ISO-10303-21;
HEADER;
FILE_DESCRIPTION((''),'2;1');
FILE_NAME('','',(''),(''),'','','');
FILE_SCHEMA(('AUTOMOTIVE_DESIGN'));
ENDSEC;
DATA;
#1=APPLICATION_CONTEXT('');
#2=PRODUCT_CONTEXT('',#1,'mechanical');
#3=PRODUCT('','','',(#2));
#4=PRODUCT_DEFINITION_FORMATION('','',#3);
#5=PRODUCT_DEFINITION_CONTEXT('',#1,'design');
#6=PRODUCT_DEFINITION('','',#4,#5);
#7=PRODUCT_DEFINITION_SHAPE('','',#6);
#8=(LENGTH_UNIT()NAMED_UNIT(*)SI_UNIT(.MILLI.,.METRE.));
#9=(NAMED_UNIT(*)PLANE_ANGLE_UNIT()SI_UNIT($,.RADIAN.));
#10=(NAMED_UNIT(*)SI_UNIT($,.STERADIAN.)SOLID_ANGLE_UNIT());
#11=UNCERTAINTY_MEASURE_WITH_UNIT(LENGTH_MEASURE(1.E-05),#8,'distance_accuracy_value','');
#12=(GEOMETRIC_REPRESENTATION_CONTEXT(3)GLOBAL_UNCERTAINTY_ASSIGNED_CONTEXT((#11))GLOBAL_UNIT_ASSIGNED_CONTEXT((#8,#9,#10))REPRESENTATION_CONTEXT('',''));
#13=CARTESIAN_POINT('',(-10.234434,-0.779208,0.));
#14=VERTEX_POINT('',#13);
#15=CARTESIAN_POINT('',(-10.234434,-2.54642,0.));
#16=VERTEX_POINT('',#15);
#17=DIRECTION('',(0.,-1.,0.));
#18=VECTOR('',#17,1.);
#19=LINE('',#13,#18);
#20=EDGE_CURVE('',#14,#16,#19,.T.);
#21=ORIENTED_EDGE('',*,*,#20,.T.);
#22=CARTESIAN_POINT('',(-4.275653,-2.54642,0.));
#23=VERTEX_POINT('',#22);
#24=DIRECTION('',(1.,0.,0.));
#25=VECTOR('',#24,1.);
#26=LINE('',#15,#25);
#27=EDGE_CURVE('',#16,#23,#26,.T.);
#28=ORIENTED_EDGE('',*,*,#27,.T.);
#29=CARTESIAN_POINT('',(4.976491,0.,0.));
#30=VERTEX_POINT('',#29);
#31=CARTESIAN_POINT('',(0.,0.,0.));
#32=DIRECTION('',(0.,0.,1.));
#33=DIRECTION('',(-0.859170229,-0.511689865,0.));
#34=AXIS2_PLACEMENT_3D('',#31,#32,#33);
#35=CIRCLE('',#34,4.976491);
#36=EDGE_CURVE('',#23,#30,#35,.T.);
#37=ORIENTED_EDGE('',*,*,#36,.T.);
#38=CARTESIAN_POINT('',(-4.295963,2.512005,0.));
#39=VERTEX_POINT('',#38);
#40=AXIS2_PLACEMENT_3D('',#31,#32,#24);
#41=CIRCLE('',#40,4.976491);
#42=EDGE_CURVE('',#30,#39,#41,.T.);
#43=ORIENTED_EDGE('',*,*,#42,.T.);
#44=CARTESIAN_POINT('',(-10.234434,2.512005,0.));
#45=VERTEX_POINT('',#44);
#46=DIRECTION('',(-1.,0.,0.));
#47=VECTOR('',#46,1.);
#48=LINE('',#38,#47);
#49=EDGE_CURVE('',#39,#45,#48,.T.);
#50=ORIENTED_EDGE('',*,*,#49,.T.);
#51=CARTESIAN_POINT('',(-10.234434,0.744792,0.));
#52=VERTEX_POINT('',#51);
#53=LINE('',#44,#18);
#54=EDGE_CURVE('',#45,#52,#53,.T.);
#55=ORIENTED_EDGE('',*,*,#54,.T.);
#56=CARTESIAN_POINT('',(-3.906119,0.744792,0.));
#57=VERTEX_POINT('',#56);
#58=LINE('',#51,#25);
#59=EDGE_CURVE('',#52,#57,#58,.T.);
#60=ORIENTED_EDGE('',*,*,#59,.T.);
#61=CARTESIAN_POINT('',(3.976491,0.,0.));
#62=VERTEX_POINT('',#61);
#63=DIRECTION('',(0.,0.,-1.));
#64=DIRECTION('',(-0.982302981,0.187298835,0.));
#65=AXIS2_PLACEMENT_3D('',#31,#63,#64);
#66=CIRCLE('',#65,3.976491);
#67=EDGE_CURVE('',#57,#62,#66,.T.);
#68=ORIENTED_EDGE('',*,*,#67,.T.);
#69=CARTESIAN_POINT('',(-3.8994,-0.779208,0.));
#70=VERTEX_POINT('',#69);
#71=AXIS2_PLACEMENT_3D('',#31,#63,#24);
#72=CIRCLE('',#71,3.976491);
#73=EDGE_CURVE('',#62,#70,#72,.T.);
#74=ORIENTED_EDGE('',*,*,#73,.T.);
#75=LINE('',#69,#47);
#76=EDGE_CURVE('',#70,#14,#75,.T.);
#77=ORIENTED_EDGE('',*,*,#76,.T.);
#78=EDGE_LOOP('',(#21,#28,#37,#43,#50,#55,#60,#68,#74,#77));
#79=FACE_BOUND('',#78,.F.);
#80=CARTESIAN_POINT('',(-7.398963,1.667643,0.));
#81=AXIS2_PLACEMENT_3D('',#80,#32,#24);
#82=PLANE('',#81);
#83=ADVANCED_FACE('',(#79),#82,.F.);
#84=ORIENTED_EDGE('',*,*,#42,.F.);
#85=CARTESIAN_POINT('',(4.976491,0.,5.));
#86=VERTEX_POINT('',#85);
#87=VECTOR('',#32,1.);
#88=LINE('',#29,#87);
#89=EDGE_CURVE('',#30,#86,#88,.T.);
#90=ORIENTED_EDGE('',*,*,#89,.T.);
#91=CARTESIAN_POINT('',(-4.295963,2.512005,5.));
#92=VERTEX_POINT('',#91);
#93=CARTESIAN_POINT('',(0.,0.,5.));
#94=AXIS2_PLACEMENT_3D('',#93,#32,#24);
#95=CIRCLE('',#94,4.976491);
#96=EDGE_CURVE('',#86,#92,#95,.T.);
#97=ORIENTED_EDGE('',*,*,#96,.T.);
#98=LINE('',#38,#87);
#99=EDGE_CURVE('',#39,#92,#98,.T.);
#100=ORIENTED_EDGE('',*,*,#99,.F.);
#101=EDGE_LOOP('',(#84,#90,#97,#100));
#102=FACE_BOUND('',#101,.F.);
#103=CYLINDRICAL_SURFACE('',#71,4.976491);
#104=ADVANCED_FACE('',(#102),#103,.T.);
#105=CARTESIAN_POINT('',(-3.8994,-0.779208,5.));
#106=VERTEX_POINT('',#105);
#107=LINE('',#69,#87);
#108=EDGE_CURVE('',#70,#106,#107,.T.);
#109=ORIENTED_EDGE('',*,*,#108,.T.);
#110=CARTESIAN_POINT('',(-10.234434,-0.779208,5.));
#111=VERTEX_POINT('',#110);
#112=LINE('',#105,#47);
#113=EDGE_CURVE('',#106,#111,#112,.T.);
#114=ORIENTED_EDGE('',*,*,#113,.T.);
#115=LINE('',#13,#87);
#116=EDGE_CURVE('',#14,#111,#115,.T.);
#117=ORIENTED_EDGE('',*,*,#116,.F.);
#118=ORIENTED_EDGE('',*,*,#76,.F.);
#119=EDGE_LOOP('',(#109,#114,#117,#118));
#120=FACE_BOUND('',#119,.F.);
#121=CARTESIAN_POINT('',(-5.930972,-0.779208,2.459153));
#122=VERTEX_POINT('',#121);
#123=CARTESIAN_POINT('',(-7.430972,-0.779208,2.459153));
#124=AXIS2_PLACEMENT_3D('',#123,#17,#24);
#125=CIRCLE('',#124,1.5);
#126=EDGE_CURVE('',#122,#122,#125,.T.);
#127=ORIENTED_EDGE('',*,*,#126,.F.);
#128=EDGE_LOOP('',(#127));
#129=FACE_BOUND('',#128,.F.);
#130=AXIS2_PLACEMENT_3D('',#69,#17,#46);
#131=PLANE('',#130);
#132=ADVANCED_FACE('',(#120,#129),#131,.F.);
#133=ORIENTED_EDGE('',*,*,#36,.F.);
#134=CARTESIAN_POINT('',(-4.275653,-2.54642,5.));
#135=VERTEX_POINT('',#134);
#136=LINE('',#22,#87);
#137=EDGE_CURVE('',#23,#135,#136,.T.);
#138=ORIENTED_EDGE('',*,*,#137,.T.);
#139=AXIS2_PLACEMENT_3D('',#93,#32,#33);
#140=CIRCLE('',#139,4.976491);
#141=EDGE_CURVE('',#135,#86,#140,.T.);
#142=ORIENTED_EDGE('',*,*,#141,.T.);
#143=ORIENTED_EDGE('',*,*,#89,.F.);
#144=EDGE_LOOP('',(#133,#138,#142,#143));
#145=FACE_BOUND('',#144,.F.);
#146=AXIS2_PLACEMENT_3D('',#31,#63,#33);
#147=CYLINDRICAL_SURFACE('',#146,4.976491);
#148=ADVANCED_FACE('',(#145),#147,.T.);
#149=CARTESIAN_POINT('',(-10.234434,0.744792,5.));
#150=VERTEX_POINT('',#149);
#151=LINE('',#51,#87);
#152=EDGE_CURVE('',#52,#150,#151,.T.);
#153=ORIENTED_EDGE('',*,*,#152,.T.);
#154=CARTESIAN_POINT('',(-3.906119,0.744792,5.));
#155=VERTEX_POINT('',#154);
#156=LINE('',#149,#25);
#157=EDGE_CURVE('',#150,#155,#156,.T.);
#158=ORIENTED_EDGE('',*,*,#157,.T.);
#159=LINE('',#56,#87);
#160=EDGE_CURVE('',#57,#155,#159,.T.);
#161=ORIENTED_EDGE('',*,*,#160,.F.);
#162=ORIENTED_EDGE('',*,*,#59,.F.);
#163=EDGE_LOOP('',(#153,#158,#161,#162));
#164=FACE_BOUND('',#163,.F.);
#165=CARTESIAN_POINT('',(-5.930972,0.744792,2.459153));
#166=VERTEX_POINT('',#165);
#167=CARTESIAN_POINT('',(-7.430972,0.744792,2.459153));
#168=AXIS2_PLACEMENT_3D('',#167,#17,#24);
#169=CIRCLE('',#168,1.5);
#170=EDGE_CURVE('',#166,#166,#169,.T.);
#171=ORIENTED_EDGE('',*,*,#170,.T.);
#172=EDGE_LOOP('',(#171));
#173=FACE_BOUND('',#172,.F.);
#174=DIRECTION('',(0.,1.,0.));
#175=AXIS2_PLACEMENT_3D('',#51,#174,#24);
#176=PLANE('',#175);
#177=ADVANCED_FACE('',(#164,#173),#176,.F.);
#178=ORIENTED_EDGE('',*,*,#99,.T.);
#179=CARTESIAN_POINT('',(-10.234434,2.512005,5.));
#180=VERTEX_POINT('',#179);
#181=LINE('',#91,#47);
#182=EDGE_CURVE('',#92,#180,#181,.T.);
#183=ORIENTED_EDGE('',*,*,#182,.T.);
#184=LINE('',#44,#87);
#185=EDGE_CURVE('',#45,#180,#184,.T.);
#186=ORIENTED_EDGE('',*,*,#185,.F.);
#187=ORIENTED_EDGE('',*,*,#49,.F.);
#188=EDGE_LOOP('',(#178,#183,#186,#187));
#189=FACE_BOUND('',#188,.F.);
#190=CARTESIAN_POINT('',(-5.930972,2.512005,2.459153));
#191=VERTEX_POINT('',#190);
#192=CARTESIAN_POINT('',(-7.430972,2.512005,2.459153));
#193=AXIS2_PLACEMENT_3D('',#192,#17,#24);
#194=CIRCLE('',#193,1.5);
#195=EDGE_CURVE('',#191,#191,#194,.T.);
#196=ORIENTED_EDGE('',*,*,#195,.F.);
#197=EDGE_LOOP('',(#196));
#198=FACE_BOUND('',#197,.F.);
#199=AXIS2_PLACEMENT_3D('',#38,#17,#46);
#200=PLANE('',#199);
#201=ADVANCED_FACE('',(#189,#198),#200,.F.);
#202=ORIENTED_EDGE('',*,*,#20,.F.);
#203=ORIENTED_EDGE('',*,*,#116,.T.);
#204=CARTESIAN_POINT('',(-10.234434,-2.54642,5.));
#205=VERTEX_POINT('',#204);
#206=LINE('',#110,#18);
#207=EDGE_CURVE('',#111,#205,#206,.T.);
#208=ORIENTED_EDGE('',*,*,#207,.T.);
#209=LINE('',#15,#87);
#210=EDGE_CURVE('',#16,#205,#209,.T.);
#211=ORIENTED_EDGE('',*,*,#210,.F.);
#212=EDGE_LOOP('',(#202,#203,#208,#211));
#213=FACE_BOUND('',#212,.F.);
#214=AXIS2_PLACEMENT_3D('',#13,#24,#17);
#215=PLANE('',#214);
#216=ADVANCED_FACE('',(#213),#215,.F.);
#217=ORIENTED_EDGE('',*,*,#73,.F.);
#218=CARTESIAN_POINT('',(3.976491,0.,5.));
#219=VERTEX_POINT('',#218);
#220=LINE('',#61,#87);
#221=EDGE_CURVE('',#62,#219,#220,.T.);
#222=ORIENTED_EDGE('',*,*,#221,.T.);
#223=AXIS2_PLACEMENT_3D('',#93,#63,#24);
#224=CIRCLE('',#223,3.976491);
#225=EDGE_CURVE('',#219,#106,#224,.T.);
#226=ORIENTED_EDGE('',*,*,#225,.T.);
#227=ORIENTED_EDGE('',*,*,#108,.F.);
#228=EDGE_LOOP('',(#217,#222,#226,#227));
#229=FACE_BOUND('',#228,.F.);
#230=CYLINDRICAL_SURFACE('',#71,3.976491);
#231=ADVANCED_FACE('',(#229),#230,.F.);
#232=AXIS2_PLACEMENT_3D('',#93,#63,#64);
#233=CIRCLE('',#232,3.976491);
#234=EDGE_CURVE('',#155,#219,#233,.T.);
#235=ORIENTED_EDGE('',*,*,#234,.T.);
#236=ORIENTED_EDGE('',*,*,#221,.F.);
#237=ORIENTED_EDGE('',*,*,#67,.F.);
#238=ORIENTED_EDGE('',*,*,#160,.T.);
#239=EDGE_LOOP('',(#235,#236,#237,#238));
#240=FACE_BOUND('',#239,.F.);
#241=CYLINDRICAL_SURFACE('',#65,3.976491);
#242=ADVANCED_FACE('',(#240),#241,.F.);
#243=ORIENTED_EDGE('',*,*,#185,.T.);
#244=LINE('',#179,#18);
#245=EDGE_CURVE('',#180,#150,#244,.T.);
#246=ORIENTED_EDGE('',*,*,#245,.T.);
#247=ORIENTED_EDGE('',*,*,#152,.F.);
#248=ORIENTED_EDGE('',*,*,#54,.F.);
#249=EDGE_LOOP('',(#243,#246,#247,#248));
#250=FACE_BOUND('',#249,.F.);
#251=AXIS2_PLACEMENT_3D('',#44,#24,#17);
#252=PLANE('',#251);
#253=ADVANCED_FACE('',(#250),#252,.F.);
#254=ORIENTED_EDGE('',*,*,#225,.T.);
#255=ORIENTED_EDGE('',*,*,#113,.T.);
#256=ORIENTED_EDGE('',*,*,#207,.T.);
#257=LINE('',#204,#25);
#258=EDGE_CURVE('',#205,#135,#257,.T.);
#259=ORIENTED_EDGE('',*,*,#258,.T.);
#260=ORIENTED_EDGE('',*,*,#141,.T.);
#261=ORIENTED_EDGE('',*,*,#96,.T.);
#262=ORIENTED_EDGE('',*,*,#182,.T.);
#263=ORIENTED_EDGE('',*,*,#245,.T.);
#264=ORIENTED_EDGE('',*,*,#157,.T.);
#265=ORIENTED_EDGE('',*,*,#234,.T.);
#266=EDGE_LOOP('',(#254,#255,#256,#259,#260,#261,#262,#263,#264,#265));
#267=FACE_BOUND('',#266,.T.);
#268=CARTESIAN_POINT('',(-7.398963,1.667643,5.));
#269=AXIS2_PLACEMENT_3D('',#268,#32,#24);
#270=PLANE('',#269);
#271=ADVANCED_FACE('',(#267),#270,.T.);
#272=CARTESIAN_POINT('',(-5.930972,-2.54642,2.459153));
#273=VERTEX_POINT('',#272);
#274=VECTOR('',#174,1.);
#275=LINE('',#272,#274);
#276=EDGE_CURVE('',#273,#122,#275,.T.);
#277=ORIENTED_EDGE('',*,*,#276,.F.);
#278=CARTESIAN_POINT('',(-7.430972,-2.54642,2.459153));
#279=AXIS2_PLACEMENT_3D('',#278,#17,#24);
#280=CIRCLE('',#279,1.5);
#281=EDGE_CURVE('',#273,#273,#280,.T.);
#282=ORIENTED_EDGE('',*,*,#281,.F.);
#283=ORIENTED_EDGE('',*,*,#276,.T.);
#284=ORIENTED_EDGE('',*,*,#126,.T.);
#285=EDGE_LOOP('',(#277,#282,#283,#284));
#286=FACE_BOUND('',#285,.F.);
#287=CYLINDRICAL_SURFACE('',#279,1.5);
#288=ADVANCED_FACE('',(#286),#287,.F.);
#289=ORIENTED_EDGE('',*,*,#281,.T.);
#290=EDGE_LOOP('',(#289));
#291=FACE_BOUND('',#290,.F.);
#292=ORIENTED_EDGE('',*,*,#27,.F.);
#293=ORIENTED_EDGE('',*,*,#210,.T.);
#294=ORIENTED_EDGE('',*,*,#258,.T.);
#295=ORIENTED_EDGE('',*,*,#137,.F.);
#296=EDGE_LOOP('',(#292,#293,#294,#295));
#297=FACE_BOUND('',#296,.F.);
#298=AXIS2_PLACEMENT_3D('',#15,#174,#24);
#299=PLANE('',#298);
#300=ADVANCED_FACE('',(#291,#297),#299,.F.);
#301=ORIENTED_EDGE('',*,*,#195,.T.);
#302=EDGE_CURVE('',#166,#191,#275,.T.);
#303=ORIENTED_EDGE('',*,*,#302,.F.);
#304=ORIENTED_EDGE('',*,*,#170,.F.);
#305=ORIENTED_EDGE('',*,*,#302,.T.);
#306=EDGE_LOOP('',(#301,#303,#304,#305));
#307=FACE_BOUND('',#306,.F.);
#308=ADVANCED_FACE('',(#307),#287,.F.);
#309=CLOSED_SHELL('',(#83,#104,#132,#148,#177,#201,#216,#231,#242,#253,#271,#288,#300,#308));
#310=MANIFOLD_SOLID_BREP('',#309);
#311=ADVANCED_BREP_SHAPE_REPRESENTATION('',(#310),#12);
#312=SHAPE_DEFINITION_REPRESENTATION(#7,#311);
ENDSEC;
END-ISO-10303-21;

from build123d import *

# Parameters (mm, degrees)
F1_DEPTH = 5
F2_R     = 1.5
F3_DEPTH = 25.4


with BuildPart() as f1:
    # F0 (on Top) → F1 (new body)
    with BuildSketch(Plane.XY):
        with BuildLine():
            Line((-10.2344341576, 0.7447922041), (-4.9204421579, 0.7447922041))
            ThreePointArc((-4.9204421579, 0.7447922041), (-4.6921521255, 1.6580635959), (-4.2959631379, 2.5120046127))
            Line((-4.2959631379, 2.5120046127), (-10.2344341576, 2.5120046127))
            Line((-10.2344341576, 2.5120046127), (-10.2344341576, 0.7447922041))
        make_face()
        with BuildLine():
            ThreePointArc((-4.2756532365, -2.5464202045), (-4.6795608737, -1.6932738958), (-4.9151095275, -0.7792077959))
            Line((-4.9151095275, -0.7792077959), (-10.2344341576, -0.7792077959))
            Line((-10.2344341576, -0.7792077959), (-10.2344341576, -2.5464202045))
            Line((-10.2344341576, -2.5464202045), (-4.2756532365, -2.5464202045))
        make_face()
        with BuildLine():
            ThreePointArc((-3.9061193363, 0.7447922041), (0.3740546925, 3.9588592781), (3.9764913802, 0))
            ThreePointArc((3.9764913802, 0), (0.391506034, -3.9571715558), (-3.8993998137, -0.7792077959))
            Line((-3.8993998137, -0.7792077959), (-4.9151095275, -0.7792077959))
            ThreePointArc((-4.9151095275, -0.7792077959), (-4.6795608737, -1.6932738958), (-4.2756532365, -2.5464202045))
            ThreePointArc((-4.2756532365, -2.5464202045), (1.3205519643, -4.7980838849), (4.9764913802, 0))
            ThreePointArc((4.9764913802, 0), (1.3012768598, 4.8033472695), (-4.2959631379, 2.5120046127))
            ThreePointArc((-4.2959631379, 2.5120046127), (-4.6921521255, 1.6580635959), (-4.9204421579, 0.7447922041))
            Line((-4.9204421579, 0.7447922041), (-3.9061193363, 0.7447922041))
        make_face()
    extrude(amount=F1_DEPTH)

    # F2 (on face) → F3 (cut)
    with BuildSketch(Plane.XZ.offset(2.5464202045)):
        with Locations((-7.4309720658, 2.4591526017)):
            Circle(F2_R)
    extrude(amount=-F3_DEPTH, mode=Mode.SUBTRACT)


solid = f1.part
